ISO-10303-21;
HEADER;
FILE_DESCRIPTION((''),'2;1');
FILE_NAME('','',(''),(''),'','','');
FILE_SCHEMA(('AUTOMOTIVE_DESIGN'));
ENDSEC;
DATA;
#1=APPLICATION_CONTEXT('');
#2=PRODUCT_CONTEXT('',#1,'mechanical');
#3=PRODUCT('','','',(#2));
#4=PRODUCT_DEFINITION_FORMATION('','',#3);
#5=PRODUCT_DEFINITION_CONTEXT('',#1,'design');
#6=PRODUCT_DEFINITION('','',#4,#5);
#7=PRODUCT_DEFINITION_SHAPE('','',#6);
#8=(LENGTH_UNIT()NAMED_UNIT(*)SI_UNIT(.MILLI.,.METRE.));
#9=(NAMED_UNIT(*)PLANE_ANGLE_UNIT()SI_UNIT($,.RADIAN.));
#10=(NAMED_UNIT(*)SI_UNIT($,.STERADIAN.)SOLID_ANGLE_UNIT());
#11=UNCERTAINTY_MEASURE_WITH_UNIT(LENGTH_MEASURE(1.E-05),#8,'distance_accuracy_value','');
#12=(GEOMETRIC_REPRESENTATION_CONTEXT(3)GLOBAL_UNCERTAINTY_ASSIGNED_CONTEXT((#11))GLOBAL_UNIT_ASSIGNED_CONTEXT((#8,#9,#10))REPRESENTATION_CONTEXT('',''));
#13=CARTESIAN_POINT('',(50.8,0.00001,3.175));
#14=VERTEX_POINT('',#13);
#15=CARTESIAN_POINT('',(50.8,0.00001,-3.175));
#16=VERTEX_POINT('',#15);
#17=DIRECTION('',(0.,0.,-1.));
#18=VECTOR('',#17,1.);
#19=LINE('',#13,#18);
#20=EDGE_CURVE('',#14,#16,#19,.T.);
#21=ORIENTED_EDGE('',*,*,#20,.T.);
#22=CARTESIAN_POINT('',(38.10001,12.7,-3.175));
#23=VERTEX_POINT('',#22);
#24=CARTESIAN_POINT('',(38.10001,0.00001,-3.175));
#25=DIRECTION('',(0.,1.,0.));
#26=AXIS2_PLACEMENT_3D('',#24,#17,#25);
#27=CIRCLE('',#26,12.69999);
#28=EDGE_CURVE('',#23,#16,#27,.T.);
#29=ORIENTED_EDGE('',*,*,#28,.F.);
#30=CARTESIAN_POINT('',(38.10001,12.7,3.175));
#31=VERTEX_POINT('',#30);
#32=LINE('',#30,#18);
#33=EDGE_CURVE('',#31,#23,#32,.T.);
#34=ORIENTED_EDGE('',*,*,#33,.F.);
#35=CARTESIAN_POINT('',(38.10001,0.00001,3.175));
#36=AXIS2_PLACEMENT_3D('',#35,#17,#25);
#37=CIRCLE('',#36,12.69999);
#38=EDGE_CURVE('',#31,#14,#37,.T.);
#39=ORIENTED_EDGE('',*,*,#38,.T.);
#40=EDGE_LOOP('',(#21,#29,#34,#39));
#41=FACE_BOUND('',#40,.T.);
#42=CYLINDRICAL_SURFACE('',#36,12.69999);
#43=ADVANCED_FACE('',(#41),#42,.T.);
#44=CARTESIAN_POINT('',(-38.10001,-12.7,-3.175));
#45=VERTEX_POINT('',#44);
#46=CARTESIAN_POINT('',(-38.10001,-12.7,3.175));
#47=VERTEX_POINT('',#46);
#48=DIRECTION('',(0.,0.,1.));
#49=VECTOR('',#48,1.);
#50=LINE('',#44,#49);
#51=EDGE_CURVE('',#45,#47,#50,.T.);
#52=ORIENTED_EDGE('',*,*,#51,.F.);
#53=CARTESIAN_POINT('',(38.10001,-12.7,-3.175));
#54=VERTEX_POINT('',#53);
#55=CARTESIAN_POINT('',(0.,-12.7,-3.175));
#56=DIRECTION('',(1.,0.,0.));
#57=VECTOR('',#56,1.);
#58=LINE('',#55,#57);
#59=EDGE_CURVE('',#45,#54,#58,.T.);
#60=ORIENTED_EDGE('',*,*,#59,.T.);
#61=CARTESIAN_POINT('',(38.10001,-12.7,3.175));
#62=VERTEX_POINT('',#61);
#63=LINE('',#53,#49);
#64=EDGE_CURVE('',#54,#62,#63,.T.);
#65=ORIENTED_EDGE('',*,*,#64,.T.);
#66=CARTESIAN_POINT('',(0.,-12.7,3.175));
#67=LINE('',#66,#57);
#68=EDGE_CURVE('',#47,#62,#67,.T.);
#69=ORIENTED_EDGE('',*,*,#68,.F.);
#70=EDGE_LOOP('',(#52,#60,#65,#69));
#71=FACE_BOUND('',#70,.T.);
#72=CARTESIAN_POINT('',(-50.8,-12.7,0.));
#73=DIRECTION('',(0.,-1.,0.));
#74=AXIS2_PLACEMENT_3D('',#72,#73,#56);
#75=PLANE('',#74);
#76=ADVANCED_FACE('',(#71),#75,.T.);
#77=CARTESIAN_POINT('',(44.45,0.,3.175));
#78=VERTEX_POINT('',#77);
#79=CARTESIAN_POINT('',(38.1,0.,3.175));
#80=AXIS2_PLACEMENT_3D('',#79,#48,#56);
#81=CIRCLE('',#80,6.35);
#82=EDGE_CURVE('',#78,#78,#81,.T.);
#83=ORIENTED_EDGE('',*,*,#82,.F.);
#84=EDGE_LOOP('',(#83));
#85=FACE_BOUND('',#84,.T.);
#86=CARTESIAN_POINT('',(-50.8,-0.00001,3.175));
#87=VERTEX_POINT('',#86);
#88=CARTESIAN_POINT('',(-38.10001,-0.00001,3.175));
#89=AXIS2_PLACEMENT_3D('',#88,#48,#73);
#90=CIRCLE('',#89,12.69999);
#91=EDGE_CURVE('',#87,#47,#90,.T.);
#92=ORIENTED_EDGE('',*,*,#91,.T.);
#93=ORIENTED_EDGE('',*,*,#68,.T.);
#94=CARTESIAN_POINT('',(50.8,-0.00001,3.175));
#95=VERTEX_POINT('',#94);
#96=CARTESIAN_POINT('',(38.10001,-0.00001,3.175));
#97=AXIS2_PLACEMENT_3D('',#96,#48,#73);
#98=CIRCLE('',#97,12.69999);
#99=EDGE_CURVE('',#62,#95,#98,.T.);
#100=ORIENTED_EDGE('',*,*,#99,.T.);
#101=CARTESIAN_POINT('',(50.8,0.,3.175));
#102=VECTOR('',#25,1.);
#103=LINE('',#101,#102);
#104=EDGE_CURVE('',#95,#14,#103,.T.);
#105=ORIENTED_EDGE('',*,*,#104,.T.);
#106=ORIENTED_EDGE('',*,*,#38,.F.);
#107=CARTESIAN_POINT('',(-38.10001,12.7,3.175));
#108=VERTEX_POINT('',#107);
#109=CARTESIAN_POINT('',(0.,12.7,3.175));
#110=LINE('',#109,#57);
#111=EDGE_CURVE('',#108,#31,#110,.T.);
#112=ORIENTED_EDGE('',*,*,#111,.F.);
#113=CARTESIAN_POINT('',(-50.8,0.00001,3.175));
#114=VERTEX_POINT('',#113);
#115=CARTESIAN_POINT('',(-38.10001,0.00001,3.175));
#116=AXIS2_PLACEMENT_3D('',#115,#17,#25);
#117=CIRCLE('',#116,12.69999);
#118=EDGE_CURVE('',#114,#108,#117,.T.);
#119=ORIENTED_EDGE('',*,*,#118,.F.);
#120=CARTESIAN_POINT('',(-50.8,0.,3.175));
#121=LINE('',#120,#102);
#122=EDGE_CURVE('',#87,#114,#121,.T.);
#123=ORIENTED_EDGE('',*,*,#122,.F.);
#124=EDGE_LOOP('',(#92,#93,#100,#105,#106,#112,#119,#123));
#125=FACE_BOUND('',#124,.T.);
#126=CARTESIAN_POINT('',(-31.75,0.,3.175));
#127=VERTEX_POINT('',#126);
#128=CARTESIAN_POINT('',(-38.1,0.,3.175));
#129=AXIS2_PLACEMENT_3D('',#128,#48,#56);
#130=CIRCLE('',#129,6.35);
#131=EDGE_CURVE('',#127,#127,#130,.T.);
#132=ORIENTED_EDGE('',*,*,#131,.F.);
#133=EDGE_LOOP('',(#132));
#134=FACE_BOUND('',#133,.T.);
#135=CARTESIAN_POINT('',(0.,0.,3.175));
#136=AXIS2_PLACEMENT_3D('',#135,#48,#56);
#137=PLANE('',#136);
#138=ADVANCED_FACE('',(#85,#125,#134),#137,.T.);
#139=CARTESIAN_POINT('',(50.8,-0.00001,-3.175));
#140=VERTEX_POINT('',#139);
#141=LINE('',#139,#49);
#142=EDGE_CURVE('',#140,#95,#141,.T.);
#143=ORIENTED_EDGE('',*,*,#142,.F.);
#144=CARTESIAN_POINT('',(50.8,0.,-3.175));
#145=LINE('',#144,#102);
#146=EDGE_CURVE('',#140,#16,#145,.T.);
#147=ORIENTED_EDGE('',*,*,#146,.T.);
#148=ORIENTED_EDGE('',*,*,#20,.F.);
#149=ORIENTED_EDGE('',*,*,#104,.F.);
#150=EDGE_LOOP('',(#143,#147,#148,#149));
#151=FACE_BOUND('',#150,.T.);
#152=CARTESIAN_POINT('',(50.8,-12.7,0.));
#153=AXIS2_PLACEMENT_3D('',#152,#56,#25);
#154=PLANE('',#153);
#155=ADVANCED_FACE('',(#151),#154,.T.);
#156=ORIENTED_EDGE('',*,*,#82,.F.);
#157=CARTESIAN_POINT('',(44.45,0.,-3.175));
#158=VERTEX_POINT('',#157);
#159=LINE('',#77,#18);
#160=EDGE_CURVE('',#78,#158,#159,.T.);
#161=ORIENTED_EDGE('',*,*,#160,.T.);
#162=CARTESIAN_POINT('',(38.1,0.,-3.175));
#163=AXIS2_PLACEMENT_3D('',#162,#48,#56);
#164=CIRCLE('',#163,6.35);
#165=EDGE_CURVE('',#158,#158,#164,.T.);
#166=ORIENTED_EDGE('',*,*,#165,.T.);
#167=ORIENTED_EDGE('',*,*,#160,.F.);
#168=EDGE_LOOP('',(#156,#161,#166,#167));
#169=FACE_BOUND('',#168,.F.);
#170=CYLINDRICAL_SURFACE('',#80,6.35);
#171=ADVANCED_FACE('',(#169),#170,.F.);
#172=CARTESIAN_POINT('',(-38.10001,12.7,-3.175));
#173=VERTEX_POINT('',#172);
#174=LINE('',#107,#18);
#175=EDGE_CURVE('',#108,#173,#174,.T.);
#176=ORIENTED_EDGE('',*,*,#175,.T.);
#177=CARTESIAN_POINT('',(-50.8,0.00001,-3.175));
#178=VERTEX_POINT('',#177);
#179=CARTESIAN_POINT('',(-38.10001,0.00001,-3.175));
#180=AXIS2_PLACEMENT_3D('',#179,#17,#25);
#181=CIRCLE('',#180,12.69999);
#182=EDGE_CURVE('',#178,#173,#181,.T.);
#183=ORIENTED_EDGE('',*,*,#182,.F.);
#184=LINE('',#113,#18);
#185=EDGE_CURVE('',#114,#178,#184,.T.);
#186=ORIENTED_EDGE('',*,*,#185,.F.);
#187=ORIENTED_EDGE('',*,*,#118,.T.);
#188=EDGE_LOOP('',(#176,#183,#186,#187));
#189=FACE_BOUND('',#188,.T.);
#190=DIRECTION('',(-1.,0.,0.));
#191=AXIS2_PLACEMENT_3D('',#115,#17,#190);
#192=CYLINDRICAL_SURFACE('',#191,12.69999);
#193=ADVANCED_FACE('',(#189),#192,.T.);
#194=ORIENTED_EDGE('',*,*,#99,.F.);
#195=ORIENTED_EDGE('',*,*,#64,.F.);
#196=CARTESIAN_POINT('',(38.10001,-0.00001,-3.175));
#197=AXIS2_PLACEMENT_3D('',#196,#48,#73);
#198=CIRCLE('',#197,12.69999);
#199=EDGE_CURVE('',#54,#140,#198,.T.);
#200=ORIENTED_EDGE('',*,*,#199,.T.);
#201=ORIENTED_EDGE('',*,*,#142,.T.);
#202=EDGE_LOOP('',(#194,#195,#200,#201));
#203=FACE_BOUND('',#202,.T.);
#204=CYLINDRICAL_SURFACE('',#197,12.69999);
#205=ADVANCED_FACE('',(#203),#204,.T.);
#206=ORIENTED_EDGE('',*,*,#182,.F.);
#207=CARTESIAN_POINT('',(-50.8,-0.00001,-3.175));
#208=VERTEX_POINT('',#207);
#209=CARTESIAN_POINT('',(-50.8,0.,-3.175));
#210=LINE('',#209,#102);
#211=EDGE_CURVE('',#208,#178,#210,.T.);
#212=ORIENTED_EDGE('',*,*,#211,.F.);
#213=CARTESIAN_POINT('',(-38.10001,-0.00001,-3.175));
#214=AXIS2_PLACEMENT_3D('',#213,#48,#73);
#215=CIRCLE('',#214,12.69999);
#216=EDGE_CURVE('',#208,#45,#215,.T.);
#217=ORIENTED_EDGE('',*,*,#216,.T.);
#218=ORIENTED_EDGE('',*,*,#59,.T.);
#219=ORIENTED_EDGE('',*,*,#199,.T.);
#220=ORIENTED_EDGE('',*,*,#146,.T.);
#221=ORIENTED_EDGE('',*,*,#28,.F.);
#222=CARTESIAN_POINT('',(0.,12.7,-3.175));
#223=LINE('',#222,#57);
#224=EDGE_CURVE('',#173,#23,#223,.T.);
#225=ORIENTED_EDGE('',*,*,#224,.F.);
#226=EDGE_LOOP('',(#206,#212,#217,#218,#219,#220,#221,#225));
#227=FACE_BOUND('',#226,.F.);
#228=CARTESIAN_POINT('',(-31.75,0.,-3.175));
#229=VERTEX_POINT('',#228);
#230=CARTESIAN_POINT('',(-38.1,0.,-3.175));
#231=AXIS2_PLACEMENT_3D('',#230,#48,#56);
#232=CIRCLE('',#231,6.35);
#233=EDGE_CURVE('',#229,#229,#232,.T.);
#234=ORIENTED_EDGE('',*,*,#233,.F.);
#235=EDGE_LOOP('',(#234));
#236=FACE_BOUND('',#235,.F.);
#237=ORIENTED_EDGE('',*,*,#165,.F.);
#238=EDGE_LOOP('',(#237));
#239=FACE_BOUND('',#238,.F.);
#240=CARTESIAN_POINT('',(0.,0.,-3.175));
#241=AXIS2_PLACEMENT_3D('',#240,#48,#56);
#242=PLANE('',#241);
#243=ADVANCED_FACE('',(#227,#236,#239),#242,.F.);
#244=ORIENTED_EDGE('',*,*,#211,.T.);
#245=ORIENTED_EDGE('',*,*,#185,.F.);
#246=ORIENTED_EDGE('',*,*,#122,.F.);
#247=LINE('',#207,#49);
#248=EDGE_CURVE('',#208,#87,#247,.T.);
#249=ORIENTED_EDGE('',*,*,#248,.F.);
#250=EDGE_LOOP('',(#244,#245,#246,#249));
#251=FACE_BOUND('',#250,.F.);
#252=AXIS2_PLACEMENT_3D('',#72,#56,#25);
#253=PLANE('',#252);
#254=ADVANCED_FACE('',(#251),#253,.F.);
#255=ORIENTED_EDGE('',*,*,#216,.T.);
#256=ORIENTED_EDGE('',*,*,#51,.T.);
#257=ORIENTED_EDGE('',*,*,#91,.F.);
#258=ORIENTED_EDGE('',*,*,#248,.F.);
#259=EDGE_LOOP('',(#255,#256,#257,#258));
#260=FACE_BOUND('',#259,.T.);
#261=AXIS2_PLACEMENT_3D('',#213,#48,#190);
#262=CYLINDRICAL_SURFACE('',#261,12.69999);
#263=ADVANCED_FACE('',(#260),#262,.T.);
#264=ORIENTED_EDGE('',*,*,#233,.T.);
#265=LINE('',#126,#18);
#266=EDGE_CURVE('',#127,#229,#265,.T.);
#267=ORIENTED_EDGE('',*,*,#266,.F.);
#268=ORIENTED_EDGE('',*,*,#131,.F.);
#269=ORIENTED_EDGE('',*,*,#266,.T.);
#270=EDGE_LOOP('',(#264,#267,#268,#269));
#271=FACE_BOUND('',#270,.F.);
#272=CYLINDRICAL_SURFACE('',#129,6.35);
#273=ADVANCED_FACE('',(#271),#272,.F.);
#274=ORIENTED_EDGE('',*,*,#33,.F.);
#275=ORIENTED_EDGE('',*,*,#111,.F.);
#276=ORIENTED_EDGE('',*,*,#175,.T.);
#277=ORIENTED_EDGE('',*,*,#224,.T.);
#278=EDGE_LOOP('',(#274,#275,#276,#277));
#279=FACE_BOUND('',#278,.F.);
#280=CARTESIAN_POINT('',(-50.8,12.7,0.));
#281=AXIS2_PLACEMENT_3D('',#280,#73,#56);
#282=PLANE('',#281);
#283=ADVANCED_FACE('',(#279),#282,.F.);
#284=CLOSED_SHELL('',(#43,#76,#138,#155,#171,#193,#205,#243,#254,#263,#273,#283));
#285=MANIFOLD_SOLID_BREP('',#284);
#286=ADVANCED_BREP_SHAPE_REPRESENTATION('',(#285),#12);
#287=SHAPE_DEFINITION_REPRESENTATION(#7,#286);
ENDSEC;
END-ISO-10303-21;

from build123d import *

# Parameters (mm, degrees)
F0_W          = 101.6
F0_H          = 25.4
F1_DEPTH      = 3.175
F1_DEPTH_BACK = 3.175
F2_R          = 6.35
F3_DEPTH      = 6.351
F4_DEPTH      = 6.351
F5_R          = 12.69999


# Not quite as in the source:
# - a fillet or chamfer is up to 0.001 mm smaller than in the source, because OpenCascade refuses the exact size


with BuildPart() as f1:
    # F0 (on Top) → F1 (new body, two sides)
    with BuildSketch(Plane.XY) as f1_sk:
        Rectangle(F0_W, F0_H)
    extrude(amount=F1_DEPTH)
    extrude(f1_sk.sketch, amount=-F1_DEPTH_BACK)

    # F2 (on face) → F3 (cut, through all)
    with BuildSketch(Plane.XY.offset(3.175)):
        with Locations((38.1, 0)):
            Circle(F2_R)
        with Locations((-38.1, 0)):
            Circle(F2_R)
    extrude(amount=-F3_DEPTH, mode=Mode.SUBTRACT)

    # F2 (on face) → F4 (cut, through all)
    with BuildSketch(Plane.XY.offset(3.175)):
        with Locations((38.1, 0)):
            Circle(F2_R)
        with Locations((-38.1, 0)):
            Circle(F2_R)
    extrude(amount=-F4_DEPTH, mode=Mode.SUBTRACT)

    # F5 (radius 12.7 in the source; OpenCascade refuses exactly that, so slightly less here)
    f5_edges = [f1.edges().sort_by_distance(p)[0] for p in [
        (50.8, -12.7, 0),
        (-50.8, -12.7, 0),
        (50.8, 12.7, 0),
        (-50.8, 12.7, 0),
    ]]
    fillet(f5_edges, radius=F5_R)


solid = f1.part
